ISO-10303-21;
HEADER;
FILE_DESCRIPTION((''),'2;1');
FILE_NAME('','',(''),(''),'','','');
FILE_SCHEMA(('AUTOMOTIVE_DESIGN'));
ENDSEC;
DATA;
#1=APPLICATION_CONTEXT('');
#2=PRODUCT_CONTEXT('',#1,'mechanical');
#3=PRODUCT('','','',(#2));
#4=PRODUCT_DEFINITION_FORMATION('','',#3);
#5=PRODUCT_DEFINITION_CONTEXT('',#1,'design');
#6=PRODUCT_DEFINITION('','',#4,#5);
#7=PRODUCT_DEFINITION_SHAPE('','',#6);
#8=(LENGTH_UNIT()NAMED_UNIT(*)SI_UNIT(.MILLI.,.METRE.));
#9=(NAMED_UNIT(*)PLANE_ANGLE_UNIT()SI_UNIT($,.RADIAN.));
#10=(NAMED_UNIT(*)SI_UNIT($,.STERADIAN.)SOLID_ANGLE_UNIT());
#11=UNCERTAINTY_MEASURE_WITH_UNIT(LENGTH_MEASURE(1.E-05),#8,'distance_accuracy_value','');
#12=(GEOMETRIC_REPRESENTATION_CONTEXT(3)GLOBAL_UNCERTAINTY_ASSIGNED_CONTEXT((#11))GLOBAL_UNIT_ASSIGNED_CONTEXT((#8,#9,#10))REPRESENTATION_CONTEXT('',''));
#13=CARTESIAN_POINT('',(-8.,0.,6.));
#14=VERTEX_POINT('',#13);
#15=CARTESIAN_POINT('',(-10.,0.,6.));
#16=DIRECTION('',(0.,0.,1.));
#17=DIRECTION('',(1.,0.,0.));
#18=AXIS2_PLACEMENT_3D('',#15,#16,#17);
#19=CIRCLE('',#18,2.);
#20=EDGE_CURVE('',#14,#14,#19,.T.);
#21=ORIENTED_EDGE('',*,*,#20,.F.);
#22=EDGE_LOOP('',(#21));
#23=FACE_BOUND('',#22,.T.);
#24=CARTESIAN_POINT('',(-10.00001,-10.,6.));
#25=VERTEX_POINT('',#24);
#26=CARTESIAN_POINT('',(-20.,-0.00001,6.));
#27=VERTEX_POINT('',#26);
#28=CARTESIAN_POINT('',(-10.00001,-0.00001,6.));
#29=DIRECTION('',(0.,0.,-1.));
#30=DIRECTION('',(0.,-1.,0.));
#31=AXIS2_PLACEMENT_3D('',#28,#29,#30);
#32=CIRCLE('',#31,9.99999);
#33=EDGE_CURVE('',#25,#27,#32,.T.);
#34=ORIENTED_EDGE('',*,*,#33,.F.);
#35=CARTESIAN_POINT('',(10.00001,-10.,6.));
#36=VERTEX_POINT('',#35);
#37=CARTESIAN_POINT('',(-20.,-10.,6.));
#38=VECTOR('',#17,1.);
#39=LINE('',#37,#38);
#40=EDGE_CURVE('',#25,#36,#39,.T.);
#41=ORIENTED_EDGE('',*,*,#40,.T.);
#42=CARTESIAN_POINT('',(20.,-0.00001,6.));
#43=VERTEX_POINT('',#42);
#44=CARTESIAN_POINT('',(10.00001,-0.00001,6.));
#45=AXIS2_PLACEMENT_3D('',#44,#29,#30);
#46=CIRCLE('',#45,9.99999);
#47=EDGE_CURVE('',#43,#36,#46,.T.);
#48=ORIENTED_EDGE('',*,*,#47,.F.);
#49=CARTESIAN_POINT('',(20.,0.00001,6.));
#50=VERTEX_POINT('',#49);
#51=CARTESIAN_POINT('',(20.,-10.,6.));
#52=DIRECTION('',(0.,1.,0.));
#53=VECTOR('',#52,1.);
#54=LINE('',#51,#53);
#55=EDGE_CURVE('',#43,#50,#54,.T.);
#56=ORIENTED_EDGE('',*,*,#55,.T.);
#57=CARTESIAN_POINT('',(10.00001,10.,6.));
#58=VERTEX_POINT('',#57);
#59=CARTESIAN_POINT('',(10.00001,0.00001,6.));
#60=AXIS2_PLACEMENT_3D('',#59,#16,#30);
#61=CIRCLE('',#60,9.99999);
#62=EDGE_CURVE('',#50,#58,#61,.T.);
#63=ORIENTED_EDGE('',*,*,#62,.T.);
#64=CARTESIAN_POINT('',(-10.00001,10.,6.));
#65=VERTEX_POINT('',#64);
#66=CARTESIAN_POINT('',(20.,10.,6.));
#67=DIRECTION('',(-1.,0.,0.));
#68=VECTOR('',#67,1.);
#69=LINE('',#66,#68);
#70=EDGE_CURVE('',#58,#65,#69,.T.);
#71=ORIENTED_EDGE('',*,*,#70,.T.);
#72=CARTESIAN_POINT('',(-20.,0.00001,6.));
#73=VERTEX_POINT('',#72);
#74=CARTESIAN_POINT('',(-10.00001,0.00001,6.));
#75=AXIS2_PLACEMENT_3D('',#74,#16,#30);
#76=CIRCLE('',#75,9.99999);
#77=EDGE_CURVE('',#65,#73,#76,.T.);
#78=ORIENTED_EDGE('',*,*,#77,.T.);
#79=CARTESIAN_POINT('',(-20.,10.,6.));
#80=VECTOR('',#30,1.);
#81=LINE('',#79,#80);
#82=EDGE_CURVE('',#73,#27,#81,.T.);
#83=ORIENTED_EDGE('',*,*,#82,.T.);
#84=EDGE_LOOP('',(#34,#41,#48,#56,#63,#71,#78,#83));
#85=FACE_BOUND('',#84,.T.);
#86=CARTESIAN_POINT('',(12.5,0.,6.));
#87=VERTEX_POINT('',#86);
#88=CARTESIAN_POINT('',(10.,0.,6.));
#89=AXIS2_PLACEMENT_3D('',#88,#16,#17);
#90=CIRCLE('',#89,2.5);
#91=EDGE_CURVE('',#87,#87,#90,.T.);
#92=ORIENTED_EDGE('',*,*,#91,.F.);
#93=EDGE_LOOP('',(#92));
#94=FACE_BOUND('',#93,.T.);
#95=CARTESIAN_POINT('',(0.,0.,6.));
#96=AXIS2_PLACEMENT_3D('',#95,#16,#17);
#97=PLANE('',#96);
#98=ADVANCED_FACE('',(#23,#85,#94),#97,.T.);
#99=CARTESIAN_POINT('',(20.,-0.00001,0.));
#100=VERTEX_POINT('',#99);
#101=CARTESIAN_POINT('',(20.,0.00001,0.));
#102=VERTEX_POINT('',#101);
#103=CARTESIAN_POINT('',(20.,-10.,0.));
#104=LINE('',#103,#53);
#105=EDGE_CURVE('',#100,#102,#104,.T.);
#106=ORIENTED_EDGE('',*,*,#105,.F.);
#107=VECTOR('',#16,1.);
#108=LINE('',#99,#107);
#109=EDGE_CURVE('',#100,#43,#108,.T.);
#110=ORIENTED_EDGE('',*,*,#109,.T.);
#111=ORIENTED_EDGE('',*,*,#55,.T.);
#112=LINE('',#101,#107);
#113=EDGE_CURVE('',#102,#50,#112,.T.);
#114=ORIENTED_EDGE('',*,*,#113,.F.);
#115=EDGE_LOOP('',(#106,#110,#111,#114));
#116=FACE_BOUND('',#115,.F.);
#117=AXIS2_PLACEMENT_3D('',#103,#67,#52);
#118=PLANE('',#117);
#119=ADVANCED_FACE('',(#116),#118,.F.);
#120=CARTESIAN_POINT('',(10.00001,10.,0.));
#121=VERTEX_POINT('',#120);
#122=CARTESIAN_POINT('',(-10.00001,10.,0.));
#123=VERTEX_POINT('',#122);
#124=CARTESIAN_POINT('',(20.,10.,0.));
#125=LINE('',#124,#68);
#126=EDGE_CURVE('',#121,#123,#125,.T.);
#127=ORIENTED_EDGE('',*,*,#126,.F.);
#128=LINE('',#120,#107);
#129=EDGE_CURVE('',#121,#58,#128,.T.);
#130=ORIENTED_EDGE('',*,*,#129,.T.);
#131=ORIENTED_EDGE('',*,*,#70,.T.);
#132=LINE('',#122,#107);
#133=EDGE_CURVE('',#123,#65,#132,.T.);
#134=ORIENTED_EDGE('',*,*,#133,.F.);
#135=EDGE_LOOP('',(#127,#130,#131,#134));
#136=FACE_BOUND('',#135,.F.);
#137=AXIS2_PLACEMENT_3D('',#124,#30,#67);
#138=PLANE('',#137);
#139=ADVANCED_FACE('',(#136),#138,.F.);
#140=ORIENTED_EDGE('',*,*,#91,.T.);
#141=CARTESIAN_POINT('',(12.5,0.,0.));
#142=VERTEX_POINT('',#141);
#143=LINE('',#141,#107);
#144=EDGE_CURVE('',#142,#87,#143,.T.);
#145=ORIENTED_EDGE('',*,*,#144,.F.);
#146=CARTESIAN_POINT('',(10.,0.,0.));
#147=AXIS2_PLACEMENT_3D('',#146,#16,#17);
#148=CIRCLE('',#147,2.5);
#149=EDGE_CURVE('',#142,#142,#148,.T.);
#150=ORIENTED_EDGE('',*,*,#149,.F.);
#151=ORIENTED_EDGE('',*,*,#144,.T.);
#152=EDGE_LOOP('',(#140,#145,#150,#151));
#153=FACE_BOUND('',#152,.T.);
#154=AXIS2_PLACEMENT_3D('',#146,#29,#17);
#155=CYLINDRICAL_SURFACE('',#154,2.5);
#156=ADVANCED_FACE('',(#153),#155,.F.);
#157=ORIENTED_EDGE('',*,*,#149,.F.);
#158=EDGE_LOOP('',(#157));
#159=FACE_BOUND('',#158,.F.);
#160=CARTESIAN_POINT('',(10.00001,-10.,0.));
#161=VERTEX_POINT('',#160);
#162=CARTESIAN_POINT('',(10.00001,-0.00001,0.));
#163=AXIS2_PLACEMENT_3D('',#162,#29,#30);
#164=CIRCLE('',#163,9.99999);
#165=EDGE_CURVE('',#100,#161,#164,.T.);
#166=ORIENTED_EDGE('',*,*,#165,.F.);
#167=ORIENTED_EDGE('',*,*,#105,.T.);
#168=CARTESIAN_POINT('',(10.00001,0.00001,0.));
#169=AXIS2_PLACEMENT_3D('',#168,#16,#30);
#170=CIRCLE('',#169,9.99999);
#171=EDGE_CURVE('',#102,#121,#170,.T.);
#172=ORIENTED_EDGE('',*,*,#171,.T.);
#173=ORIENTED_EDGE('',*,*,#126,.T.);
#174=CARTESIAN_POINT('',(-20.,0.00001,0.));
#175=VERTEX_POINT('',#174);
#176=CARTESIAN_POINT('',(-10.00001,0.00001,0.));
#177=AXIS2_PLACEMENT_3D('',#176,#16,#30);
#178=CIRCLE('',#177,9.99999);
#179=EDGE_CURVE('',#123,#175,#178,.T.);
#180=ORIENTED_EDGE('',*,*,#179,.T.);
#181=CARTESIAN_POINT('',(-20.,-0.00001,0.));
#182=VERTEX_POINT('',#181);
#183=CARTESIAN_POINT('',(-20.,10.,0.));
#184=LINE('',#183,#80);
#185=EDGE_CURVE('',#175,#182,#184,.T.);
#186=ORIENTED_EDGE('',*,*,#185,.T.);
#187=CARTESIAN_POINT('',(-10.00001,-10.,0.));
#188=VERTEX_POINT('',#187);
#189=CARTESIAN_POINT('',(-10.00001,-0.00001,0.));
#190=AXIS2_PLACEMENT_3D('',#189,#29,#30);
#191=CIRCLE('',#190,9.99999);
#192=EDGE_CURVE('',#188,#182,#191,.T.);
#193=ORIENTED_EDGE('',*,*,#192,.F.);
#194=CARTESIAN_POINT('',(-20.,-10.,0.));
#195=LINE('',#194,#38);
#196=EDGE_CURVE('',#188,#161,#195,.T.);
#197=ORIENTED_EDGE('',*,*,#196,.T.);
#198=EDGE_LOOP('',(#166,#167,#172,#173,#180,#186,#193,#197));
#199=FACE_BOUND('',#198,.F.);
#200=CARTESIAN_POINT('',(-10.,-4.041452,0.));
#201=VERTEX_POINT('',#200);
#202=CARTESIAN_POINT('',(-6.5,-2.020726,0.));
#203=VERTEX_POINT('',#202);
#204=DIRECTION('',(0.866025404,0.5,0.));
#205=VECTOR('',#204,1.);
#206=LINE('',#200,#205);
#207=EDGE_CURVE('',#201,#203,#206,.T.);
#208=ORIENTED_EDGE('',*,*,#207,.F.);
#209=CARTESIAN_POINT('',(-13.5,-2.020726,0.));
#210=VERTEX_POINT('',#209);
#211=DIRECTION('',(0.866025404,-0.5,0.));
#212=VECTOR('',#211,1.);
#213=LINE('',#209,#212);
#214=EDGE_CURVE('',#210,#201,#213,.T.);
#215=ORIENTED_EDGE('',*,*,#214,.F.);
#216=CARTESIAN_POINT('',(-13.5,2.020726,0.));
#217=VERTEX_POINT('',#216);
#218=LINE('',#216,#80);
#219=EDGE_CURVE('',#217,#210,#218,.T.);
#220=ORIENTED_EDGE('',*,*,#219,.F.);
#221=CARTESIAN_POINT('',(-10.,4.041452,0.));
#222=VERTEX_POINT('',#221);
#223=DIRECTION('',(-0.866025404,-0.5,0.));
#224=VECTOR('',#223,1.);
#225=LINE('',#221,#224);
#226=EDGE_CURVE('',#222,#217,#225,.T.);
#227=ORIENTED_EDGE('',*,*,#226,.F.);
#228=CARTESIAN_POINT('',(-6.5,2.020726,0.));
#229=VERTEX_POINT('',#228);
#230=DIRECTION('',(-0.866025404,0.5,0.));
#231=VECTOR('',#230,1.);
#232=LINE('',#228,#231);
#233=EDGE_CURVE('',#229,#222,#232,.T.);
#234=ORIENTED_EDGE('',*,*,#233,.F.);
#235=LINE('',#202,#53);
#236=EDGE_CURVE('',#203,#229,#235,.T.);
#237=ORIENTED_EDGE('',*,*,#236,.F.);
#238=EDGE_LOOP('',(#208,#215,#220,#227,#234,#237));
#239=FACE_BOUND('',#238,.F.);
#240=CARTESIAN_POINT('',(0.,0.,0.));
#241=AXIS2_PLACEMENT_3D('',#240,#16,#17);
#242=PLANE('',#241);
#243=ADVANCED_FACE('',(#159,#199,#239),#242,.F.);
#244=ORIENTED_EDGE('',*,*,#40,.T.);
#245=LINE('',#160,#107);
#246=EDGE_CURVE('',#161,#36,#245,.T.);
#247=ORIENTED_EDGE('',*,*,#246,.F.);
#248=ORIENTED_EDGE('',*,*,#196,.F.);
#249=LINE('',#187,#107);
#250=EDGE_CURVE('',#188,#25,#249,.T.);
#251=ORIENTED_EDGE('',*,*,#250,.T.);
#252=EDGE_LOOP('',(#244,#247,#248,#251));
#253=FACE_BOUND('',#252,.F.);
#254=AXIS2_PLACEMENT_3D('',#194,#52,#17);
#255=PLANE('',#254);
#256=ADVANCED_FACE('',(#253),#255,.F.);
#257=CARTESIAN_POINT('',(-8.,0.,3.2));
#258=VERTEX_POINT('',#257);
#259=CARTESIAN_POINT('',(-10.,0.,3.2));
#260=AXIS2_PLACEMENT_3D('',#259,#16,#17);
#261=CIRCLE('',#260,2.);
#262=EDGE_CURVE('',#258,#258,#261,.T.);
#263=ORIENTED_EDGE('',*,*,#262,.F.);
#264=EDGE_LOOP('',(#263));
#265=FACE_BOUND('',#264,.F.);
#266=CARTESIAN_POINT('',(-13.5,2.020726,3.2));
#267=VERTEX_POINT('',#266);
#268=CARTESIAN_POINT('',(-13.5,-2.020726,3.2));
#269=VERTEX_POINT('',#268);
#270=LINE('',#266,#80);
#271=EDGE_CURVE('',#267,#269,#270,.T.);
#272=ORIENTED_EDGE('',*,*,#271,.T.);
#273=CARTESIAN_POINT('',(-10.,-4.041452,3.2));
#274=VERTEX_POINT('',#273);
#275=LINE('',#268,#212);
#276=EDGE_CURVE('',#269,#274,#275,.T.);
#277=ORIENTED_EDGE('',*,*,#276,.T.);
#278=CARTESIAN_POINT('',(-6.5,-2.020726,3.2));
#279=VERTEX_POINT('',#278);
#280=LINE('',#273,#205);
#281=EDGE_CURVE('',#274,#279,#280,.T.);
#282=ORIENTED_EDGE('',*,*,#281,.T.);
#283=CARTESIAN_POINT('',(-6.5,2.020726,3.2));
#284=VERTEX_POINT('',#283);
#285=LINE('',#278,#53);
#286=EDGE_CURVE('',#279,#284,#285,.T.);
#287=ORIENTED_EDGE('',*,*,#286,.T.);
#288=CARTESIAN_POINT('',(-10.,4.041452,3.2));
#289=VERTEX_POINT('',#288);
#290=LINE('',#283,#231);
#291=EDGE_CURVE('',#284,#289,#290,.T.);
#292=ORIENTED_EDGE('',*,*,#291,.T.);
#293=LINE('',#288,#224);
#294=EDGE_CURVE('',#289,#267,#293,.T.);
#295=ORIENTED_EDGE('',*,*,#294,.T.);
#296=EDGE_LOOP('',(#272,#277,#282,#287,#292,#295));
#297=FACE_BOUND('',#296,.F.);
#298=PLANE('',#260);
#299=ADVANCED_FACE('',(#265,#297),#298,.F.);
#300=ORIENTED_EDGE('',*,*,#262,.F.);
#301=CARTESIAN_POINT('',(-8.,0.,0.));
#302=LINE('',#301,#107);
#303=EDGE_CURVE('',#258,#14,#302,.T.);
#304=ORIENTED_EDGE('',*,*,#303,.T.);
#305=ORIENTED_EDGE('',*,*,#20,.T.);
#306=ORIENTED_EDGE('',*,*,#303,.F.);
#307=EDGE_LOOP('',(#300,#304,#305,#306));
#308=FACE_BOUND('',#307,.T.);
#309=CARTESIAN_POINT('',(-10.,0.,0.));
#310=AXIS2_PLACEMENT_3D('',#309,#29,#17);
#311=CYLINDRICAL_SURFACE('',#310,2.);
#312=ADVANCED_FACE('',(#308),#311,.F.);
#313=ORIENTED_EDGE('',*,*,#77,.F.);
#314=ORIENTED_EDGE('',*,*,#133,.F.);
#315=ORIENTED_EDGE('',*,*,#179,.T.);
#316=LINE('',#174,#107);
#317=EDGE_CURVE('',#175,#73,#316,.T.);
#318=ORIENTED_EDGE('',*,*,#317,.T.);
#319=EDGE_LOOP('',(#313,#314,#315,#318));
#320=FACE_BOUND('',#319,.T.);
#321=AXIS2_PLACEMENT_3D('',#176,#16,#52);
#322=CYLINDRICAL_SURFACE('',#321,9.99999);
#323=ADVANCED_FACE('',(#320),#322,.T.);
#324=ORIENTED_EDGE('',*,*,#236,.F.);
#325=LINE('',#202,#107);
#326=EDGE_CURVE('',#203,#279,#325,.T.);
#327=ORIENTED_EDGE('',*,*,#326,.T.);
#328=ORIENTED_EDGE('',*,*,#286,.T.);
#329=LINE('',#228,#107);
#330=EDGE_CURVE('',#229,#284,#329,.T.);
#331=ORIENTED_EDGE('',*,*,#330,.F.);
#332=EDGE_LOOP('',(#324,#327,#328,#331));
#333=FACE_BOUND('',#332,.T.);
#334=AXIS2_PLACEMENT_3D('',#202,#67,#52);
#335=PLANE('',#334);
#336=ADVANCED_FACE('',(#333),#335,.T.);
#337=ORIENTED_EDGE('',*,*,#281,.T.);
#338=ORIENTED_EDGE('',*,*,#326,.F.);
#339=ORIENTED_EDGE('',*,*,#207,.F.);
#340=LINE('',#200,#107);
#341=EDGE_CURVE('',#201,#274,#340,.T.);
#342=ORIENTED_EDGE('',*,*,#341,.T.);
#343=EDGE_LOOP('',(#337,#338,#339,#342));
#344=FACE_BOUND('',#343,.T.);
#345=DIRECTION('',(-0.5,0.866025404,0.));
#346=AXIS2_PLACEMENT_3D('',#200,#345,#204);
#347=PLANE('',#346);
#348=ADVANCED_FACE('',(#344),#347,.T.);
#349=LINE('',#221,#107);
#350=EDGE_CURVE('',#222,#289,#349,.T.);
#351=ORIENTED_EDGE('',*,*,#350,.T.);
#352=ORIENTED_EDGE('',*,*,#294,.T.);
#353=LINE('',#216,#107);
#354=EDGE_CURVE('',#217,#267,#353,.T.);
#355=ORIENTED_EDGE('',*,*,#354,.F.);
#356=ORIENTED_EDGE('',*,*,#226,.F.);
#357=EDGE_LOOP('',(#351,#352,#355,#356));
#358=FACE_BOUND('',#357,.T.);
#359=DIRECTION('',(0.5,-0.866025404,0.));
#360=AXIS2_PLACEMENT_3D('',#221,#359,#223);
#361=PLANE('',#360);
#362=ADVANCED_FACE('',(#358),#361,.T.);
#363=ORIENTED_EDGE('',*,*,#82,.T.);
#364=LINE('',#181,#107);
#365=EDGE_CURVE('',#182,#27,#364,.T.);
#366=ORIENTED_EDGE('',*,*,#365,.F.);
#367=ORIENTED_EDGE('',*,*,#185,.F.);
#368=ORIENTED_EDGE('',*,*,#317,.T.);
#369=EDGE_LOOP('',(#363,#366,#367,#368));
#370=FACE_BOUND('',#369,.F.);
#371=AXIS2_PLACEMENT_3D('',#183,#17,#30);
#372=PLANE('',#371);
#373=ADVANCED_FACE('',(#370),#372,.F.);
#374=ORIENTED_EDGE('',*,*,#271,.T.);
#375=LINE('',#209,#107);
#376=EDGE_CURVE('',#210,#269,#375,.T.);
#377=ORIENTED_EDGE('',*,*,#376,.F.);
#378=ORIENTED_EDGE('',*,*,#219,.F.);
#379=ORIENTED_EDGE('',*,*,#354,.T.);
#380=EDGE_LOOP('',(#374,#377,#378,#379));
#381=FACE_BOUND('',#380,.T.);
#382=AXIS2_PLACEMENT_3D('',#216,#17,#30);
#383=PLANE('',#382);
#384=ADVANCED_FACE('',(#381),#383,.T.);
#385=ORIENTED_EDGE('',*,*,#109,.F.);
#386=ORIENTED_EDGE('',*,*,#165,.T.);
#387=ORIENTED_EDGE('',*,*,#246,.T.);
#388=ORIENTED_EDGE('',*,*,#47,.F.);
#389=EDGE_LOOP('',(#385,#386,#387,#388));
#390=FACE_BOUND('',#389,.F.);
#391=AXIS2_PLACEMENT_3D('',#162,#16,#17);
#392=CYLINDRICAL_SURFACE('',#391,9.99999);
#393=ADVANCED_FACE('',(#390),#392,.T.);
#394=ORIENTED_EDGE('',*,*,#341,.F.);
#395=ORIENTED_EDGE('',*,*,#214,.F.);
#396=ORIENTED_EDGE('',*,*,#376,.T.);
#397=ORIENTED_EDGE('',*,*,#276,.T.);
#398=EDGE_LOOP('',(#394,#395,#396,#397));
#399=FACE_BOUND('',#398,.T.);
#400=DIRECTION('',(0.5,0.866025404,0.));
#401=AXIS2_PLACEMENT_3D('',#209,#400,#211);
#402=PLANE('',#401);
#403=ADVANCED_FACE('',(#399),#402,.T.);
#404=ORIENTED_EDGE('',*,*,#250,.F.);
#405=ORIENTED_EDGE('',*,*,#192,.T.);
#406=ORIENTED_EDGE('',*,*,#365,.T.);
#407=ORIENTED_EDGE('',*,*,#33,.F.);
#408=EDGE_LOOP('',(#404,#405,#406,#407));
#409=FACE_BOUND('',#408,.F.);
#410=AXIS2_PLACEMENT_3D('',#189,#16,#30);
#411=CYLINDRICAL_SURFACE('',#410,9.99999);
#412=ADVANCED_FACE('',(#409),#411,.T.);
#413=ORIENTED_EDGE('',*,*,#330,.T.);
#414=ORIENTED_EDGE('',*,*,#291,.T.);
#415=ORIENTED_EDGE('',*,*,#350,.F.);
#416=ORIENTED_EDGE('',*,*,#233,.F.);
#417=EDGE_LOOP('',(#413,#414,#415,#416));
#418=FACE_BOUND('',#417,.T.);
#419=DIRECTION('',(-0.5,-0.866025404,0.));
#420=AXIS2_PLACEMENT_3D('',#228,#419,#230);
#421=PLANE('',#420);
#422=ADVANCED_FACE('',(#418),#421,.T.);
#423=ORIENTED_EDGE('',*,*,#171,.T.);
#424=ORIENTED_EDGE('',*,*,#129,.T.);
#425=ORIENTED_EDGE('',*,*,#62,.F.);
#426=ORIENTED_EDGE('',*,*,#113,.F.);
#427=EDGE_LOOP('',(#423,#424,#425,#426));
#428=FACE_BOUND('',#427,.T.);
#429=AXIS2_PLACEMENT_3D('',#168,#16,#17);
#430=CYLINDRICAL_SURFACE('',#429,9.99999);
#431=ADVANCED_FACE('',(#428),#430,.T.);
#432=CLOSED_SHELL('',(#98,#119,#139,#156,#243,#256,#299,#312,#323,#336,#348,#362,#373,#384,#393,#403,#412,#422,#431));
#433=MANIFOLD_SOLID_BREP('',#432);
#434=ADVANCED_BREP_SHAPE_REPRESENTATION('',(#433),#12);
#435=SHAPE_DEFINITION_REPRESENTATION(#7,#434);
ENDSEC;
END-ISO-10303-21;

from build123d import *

# Parameters (mm, degrees)
F0_R     = 2.5
F0_R_2   = 2
F1_DEPTH = 6
F2_DEPTH = 3.2
F3_R     = 9.99999


# Not quite as in the source:
# - a fillet or chamfer is up to 0.001 mm smaller than in the source, because OpenCascade refuses the exact size


with BuildPart() as f1:
    # F0 (on Top) → F1 (new body)
    with BuildSketch(Plane.XY):
        Polygon((20, -10), (20, 10), (0, 10), (-20, 10), (-20, -10), (0, -10), align=None)
        Polygon((-10, 4.0414518843), (-6.5, 2.0207259422), (-6.5, -2.0207259422), (-10, -4.0414518843), (-13.5, -2.0207259422), (-13.5, 2.0207259422), align=None, mode=Mode.SUBTRACT)
        with Locations((10, 0)):
            Circle(F0_R, mode=Mode.SUBTRACT)
        Polygon((-6.5, -2.0207259422), (-6.5, 2.0207259422), (-10, 4.0414518843), (-13.5, 2.0207259422), (-13.5, -2.0207259422), (-10, -4.0414518843), align=None)
        with Locations((-10, 0)):
            Circle(F0_R_2, mode=Mode.SUBTRACT)
    extrude(amount=F1_DEPTH)

    # F0 (on Top) → F2 (cut)
    with BuildSketch(Plane.XY):
        Polygon((-6.5, -2.0207259422), (-6.5, 2.0207259422), (-10, 4.0414518843), (-13.5, 2.0207259422), (-13.5, -2.0207259422), (-10, -4.0414518843), align=None)
        with Locations((-10, 0)):
            Circle(F0_R_2, mode=Mode.SUBTRACT)
    extrude(amount=F2_DEPTH, mode=Mode.SUBTRACT)

    # F3 (radius 10 in the source; OpenCascade refuses exactly that, so slightly less here)
    f3_edges = [f1.edges().sort_by_distance(p)[0] for p in [
        (-20, -10, 3),
        (20, -10, 3),
        (20, 10, 3),
        (-20, 10, 3),
    ]]
    fillet(f3_edges, radius=F3_R)


solid = f1.part
